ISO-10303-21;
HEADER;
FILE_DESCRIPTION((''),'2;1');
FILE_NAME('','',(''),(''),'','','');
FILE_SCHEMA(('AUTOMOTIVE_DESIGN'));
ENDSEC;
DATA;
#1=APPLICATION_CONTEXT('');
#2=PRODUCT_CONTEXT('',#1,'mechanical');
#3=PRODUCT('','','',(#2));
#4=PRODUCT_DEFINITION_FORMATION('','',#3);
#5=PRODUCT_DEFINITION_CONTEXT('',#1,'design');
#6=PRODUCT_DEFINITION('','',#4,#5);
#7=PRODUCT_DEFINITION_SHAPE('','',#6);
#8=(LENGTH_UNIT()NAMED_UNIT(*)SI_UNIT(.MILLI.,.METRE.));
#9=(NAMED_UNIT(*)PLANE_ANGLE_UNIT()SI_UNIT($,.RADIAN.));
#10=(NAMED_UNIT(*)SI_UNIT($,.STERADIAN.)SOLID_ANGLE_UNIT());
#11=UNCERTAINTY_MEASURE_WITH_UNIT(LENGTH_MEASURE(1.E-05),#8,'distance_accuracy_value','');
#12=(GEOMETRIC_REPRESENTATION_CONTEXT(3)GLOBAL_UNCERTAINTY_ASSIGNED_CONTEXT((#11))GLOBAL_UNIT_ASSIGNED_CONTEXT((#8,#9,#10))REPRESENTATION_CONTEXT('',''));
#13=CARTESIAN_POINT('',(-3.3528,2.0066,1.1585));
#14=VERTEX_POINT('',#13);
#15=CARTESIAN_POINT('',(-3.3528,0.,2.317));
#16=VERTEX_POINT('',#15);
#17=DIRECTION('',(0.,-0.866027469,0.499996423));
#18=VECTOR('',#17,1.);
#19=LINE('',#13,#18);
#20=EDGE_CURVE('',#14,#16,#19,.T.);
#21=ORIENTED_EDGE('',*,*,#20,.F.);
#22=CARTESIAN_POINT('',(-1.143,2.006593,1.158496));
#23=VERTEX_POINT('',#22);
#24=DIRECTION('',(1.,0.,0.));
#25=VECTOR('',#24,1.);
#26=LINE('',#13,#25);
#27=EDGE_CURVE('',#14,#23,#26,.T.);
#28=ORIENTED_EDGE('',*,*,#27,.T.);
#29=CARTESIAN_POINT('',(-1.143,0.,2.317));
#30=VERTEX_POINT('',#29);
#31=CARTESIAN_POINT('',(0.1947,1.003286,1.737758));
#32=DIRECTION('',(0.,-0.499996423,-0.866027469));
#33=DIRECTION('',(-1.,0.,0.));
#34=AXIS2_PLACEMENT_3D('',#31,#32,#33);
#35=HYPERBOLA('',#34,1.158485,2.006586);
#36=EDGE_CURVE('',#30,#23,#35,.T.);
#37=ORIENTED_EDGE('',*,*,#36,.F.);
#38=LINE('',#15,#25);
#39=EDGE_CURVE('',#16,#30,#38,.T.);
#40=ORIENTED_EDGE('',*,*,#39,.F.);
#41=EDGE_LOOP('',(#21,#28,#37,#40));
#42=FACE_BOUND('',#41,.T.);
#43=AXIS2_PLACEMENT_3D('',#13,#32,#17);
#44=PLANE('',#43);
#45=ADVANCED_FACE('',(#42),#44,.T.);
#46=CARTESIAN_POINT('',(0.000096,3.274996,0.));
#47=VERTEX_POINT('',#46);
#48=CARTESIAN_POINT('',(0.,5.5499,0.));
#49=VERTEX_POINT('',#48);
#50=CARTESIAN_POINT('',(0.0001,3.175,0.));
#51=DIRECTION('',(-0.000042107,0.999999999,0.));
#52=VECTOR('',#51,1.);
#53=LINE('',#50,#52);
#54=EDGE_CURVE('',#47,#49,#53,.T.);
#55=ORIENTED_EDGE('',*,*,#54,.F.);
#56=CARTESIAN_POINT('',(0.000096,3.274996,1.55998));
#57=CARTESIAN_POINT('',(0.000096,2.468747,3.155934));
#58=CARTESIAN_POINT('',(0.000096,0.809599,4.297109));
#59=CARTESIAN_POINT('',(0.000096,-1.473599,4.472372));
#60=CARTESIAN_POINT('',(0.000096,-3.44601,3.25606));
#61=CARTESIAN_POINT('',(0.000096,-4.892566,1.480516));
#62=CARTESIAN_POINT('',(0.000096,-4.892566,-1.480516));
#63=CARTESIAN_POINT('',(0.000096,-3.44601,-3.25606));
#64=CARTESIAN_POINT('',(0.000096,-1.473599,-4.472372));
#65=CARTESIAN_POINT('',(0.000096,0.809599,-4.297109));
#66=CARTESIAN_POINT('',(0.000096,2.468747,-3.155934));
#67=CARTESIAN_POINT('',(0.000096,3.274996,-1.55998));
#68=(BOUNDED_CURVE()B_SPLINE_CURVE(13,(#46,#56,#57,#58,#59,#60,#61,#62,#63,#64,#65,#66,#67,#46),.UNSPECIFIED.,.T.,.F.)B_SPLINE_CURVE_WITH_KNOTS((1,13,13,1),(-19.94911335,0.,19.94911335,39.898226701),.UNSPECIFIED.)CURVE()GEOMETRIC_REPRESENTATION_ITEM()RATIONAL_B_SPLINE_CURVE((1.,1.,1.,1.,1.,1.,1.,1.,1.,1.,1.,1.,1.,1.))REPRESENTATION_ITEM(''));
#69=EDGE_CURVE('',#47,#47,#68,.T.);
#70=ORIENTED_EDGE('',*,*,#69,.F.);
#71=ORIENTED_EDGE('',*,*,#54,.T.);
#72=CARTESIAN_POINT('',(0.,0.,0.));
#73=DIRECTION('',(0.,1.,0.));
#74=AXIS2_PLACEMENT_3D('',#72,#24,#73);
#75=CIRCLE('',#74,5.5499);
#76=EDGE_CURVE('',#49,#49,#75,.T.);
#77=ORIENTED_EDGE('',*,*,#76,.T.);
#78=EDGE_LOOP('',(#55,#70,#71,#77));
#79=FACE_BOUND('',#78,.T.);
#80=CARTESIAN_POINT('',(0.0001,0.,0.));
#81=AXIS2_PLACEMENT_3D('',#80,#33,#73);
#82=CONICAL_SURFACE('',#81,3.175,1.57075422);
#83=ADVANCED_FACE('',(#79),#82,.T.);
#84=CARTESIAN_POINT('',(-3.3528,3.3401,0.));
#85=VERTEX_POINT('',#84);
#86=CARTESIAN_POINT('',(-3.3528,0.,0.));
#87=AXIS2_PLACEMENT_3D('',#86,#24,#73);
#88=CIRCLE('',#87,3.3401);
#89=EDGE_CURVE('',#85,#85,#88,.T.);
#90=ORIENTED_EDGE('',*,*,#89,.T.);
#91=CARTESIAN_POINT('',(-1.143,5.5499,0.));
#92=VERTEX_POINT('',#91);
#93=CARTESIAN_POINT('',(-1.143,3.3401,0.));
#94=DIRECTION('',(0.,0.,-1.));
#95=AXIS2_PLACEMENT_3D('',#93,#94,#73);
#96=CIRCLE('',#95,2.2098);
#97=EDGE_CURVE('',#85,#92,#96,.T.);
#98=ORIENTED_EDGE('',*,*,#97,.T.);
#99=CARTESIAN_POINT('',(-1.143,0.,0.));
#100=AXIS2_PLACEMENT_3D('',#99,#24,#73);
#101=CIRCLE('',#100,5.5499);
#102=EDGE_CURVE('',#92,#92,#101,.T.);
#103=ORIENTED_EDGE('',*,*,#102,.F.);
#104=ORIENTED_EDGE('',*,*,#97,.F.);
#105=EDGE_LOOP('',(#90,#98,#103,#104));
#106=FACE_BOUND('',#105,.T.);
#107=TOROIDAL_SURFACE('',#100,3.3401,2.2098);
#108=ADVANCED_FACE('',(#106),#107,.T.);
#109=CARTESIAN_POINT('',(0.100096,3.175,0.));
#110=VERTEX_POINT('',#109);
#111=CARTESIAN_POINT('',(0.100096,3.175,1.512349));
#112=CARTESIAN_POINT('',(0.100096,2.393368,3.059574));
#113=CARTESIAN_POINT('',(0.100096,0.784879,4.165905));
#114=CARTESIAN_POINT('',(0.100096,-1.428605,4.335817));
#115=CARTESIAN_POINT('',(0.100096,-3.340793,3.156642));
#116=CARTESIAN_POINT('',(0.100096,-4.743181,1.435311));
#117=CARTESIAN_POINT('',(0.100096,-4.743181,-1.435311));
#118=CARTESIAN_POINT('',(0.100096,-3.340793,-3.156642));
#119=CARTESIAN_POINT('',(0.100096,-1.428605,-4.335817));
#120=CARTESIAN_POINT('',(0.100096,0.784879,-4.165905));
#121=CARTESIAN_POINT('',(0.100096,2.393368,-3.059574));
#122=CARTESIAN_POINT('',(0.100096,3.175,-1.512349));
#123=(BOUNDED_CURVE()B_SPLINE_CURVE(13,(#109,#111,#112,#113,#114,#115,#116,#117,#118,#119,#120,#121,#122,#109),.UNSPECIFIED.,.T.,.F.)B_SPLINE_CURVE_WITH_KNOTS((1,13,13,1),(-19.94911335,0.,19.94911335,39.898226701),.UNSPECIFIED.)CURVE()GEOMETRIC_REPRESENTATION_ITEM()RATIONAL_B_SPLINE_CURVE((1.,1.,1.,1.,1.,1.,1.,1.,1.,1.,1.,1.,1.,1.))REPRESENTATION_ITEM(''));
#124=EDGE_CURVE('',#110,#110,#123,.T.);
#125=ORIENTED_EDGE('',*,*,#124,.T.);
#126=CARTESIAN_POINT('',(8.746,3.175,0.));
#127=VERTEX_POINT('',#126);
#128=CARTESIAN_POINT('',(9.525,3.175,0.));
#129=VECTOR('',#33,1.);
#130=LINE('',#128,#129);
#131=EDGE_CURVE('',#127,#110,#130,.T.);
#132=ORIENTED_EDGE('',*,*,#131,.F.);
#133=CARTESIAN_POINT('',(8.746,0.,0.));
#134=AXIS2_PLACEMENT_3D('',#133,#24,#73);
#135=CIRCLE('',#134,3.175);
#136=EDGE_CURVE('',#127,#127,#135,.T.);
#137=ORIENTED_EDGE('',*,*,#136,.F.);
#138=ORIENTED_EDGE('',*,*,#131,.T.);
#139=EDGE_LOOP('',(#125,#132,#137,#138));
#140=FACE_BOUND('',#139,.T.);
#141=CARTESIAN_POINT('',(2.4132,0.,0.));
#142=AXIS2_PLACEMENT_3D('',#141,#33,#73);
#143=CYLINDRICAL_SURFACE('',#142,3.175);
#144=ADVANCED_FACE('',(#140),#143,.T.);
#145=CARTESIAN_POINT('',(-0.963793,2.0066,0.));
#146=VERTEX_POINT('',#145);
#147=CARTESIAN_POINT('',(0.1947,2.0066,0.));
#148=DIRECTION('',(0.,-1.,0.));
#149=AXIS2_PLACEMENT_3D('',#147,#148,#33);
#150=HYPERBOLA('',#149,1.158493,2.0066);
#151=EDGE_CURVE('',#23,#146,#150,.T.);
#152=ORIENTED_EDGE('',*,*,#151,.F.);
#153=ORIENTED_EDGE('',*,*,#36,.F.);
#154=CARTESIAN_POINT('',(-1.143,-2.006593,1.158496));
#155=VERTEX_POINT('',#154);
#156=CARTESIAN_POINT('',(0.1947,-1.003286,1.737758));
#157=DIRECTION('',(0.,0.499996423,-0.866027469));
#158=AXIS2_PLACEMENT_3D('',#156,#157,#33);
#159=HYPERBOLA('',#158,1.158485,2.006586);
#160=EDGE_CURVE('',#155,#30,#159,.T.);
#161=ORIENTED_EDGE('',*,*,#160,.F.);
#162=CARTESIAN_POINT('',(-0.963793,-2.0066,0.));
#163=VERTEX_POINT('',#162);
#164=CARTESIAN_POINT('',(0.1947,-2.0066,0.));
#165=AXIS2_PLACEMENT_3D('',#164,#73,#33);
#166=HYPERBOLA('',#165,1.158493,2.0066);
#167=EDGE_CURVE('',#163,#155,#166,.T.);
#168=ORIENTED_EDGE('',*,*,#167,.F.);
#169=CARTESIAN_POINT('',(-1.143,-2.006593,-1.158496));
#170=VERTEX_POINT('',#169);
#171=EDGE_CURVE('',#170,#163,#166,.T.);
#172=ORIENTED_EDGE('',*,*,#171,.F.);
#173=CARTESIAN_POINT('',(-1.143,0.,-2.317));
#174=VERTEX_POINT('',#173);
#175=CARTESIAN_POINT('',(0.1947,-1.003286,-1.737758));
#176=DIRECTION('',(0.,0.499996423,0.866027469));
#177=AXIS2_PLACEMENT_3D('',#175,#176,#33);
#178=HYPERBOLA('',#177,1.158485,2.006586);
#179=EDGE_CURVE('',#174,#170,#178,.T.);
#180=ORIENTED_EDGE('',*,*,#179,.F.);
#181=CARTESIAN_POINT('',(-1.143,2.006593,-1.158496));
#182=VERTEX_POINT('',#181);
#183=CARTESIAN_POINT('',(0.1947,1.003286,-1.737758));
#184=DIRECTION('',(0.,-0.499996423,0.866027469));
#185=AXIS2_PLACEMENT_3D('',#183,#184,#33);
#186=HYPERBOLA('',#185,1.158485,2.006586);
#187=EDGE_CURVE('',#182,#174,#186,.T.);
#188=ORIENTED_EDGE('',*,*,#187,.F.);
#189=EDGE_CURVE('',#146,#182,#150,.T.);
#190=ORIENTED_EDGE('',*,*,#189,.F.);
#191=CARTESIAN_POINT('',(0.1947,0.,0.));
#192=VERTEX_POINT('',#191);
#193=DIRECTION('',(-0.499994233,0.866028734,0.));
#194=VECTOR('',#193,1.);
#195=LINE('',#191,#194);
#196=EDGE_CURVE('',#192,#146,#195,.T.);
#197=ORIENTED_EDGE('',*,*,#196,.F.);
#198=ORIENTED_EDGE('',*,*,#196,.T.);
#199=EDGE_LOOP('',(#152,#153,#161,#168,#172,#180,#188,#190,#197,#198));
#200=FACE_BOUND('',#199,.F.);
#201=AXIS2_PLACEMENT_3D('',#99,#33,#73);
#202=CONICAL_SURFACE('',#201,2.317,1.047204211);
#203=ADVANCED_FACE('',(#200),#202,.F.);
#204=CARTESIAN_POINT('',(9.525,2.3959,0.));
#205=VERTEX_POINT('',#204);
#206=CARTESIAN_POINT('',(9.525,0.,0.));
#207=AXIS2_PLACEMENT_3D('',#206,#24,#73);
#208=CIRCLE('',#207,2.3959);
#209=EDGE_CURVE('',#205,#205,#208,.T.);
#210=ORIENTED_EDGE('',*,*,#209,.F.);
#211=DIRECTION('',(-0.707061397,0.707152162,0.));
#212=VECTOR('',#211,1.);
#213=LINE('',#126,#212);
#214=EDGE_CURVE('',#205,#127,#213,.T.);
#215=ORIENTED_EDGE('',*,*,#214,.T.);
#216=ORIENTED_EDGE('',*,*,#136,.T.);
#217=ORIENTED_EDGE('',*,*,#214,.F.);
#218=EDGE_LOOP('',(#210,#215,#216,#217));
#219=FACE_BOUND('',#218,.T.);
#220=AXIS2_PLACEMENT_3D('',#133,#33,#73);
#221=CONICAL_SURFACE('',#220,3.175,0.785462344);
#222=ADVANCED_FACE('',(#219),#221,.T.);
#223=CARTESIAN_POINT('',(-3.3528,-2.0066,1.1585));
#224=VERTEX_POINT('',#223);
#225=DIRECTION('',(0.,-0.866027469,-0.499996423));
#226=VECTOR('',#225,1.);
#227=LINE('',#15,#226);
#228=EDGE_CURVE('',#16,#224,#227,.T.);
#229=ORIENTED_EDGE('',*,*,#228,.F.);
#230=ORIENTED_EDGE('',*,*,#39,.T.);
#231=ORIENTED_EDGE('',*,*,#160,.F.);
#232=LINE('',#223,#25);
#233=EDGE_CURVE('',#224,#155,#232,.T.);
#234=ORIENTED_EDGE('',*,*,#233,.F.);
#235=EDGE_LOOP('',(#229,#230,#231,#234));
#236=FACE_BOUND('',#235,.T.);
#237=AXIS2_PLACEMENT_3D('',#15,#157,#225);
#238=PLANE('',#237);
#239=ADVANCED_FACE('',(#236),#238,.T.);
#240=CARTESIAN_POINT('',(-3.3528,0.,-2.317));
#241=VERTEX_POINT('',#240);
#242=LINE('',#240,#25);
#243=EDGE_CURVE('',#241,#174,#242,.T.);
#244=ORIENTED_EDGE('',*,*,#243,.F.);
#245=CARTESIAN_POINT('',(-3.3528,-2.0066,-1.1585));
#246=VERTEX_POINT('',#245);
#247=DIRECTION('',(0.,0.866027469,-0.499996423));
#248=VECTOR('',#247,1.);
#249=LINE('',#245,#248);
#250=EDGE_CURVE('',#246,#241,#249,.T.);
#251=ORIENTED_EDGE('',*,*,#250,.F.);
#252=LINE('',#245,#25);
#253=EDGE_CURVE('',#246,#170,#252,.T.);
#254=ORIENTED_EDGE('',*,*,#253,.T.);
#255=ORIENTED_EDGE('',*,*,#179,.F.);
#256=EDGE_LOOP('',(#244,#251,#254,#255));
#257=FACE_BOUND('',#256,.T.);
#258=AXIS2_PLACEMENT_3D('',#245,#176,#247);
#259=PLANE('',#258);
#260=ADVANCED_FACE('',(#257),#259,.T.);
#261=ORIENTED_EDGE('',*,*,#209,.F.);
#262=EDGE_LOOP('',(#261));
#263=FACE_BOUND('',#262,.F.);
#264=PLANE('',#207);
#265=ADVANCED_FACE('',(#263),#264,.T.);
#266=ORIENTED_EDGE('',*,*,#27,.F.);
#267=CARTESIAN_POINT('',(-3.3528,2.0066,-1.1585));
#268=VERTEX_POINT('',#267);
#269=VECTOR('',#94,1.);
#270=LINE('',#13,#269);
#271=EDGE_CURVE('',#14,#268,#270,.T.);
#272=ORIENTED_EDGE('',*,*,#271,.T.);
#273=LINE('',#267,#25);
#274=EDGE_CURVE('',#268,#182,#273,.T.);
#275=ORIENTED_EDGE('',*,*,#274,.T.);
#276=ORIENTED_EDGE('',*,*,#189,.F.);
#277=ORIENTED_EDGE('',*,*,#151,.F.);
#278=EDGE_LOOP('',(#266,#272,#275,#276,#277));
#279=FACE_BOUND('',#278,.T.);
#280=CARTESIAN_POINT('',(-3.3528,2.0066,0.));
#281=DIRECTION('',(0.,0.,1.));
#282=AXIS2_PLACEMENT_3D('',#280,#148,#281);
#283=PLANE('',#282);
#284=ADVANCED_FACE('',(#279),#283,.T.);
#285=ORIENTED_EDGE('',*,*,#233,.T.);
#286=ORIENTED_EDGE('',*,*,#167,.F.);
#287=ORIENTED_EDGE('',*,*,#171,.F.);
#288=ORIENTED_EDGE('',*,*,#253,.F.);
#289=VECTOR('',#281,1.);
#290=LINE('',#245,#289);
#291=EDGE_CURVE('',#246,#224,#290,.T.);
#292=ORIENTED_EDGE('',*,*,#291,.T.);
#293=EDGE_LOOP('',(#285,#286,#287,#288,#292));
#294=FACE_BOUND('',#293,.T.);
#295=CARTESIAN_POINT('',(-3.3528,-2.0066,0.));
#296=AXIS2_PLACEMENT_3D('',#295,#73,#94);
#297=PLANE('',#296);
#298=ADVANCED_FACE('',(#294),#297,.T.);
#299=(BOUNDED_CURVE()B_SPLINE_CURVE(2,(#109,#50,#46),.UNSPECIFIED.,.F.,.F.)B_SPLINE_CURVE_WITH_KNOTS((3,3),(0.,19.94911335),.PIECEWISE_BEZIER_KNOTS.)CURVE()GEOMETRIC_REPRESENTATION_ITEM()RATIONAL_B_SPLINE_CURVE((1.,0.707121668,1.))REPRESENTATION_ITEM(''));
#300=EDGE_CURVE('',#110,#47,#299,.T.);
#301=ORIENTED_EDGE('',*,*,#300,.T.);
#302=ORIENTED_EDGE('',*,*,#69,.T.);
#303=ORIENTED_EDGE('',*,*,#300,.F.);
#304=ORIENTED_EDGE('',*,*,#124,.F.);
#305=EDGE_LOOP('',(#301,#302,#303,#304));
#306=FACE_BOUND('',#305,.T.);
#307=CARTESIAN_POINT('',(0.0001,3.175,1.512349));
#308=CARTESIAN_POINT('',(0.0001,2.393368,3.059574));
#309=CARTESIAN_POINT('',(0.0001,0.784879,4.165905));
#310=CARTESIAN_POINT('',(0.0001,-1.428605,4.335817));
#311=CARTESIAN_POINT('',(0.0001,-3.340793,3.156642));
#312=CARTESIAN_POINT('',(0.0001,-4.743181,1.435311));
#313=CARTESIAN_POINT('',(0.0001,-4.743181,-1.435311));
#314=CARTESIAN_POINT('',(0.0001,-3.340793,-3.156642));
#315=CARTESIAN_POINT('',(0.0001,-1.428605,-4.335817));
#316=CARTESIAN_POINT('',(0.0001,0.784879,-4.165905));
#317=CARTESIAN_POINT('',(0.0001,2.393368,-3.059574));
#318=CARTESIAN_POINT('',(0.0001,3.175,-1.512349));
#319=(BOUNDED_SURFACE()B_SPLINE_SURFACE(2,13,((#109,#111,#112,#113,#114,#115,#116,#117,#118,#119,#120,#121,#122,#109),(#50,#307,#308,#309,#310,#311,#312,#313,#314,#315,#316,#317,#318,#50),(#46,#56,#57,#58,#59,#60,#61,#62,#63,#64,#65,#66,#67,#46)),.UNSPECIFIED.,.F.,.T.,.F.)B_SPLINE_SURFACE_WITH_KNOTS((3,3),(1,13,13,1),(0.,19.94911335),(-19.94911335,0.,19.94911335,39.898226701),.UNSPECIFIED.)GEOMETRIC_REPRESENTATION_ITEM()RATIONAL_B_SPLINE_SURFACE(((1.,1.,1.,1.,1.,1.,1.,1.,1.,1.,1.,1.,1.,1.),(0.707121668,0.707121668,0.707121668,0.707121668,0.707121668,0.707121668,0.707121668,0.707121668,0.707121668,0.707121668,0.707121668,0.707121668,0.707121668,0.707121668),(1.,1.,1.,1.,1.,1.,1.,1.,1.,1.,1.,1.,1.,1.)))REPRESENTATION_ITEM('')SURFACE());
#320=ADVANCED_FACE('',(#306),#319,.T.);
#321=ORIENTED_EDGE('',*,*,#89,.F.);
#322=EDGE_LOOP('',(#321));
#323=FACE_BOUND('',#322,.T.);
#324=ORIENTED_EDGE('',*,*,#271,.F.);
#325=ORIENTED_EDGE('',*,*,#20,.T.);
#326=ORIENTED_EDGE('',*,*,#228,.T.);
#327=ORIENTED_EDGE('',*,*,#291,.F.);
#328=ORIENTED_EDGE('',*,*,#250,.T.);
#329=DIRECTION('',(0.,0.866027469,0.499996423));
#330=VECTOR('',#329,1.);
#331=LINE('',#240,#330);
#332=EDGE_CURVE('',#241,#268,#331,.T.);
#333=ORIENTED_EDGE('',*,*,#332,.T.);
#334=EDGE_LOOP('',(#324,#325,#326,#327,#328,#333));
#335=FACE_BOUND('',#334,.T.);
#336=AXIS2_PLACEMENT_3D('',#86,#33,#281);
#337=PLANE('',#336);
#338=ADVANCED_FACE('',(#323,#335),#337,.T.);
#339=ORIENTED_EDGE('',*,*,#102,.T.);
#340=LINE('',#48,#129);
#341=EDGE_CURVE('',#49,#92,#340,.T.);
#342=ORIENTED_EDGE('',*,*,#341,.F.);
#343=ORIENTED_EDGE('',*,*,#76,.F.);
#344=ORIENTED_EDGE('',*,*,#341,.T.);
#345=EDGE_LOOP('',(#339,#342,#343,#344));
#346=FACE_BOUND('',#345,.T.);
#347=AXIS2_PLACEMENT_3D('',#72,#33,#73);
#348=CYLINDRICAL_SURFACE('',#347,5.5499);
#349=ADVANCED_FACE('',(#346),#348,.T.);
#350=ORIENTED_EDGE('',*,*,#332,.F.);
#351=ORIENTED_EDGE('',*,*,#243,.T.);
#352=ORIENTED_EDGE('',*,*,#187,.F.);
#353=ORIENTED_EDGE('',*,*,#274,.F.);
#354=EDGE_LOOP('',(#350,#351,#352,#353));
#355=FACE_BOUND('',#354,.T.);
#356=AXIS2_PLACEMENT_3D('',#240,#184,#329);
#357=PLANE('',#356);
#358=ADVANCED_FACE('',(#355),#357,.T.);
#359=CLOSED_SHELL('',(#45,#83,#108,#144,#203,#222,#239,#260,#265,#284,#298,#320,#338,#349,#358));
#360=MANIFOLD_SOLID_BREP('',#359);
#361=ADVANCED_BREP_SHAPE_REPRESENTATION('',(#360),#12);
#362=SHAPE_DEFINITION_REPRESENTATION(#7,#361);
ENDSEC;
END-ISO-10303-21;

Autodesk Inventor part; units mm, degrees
ref_plane "YZ Plane" through (0, 0, 0) normal (1, 0, 0) x (0, 1, 0)
ref_plane "XZ Plane" through (0, 0, 0) normal (0, 1, 0) x (-1, 0, 0)
sketch "Sketch1" plane through (0, 0, 0) normal (0, 0, 1) x (1, 0, 0)
  line L0 (0.1947, 0) -> (9.525, 0)
  line L1 (9.525, 0) -> (9.525, 3.175)
  line L2 (9.525, 3.175) -> (2.4132, 3.175)
  line L3 (2.4132, 3.175) -> (0.0001, 3.175)
  line L4 (0.0001, 3.175) -> (0, 3.175)
  line L5 (0, 3.175) -> (0, 5.5499)
  line L6 (0, 5.5499) -> (-3.3528, 5.5499)
  line L7 (-3.3528, 5.5499) -> (-3.3528, 2.317)
  line L8 (-3.3528, 2.317) -> (-1.143, 2.317)
  line L9 (-1.143, 2.317) -> (0.1947, 0)
  line L10 (-5.9284, 0) -> (12.1006, 0) projected
  line L11 (0, -1.11) -> (0, 6.6599) projected
  line L12 (2.4132, 3.175) -> (0, 3.175) construction
  dimension "d1" = 7.1118
  dimension "d2" = 2.4131
  dimension "d3" = 3.3528
  dimension "d4" = 2.2098
  dimension "d5" = 60
  dimension "d6" = 6.35
  dimension "d7" = 6.35
  dimension "d8" = 4.634
  dimension "d9" = 11.0998
  dimension "d26" = 9.525
revolve "Body" add sketch "Sketch1" angle 360 about axis through (0.1947, 0, 0) along (1, 0, 0) contours L9 L11 L3 L2 L1 L0 | L9 L8 L7 L6 L5 L11
sketch "Sketch2" plane through (-3.3528, 0, 0) normal (-1, 0, 0) x (0, 0, 1)
  circle A0 centre (0, 0) radius 2.317 projected
  line L0 (0, -7.7699) -> (0, 7.7699) projected
  line L1 (-7.7699, 0) -> (7.7699, 0) projected
  line L2 (2.317, 0) -> (1.1585, -2.0066)
  line L3 (1.1585, -2.0066) -> (-1.1585, -2.0066)
  line L4 (-1.1585, -2.0066) -> (-2.317, 0)
  line L5 (-2.317, 0) -> (-1.1585, 2.0066)
  line L6 (-1.1585, 2.0066) -> (1.1585, 2.0066)
  line L7 (1.1585, 2.0066) -> (2.317, 0)
extrude "Slot" add sketch "Sketch2" against normal up to next contours L7 A0 | A0 L2 | L6 L0 A0 | A0 L0 L3 | L0 L6 A0 | A0 L3 L0 | L4 A0 | A0 L5
fillet "Fillet1" radius 2.2098 1 edges at (-3.3528, -5.5499, 0)
thread "Thread" size "1/4-20 UNC" class "2A" standard "ANSI Unified Screw Threads" length 7.1118
chamfer "Chamfer1" distance 0.7791 distance2 0.779 1 edges at (9.525, -3.175, 0) measured on face at (9.525, 1.7119, 1.0506)
ref_plane "Work Plane1" through (29, 0, 0) normal (0, -1, 0) x (1, 0, 0)
fillet "Fillet2" radius 0.1 1 edges at (0.0001, -3.175, 0)
equation "\"d1\" = GEL"
equation "\"d3\" = KOH"
equation "\"d4\" = INTI"
equation "\"d6\" = GD"
equation "\"d7\" = BDM"
equation "\"d8\" = 1.1547 * SW"
equation "\"d9\" = KOD"
equation "\"d26\" = NLG"
equation "\"d30\" = R"
equation "\"d17\" = RR"
equation "\"d13\" = GEL"
equation "\"d15\" = -0.5 * SPD + 0.5 * GD"
equation "\"d16\" = GUL"
equation "\"GD\" = NND"
equation "\"NLG\" = 9.525"
equation "\"GEL\" = 7.1118"
equation "\"KOD\" = 11.0998"
equation "\"KOH\" = 3.3528"
equation "\"INTI\" = 2.2098"
equation "\"GAL\" = 2.413"
equation "\"GUL\" = 0.77902"
equation "\"BDM\" = NND"
equation "\"SW\" = 4.0132"
equation "\"RR\" = 2.2098"
equation "\"SPD\" = GD1"
equation "\"R\" = 0.1"
equation "\"KR\" = 6.3246"
equation "\"GD1\" = 4.79188"
equation "\"THREADDIA\" = 6.35"
equation "\"FAWI\" = 45deg"
equation "\"KOH1\" = 2.2098"
equation "\"NND\" = 6.35"
equation "\"TOA\" = 30deg"
equation "\"E0\" = 1.155 * SW"
properties part number "Unbrako - 1/4 x 3/8" material "Steel, Mild"
